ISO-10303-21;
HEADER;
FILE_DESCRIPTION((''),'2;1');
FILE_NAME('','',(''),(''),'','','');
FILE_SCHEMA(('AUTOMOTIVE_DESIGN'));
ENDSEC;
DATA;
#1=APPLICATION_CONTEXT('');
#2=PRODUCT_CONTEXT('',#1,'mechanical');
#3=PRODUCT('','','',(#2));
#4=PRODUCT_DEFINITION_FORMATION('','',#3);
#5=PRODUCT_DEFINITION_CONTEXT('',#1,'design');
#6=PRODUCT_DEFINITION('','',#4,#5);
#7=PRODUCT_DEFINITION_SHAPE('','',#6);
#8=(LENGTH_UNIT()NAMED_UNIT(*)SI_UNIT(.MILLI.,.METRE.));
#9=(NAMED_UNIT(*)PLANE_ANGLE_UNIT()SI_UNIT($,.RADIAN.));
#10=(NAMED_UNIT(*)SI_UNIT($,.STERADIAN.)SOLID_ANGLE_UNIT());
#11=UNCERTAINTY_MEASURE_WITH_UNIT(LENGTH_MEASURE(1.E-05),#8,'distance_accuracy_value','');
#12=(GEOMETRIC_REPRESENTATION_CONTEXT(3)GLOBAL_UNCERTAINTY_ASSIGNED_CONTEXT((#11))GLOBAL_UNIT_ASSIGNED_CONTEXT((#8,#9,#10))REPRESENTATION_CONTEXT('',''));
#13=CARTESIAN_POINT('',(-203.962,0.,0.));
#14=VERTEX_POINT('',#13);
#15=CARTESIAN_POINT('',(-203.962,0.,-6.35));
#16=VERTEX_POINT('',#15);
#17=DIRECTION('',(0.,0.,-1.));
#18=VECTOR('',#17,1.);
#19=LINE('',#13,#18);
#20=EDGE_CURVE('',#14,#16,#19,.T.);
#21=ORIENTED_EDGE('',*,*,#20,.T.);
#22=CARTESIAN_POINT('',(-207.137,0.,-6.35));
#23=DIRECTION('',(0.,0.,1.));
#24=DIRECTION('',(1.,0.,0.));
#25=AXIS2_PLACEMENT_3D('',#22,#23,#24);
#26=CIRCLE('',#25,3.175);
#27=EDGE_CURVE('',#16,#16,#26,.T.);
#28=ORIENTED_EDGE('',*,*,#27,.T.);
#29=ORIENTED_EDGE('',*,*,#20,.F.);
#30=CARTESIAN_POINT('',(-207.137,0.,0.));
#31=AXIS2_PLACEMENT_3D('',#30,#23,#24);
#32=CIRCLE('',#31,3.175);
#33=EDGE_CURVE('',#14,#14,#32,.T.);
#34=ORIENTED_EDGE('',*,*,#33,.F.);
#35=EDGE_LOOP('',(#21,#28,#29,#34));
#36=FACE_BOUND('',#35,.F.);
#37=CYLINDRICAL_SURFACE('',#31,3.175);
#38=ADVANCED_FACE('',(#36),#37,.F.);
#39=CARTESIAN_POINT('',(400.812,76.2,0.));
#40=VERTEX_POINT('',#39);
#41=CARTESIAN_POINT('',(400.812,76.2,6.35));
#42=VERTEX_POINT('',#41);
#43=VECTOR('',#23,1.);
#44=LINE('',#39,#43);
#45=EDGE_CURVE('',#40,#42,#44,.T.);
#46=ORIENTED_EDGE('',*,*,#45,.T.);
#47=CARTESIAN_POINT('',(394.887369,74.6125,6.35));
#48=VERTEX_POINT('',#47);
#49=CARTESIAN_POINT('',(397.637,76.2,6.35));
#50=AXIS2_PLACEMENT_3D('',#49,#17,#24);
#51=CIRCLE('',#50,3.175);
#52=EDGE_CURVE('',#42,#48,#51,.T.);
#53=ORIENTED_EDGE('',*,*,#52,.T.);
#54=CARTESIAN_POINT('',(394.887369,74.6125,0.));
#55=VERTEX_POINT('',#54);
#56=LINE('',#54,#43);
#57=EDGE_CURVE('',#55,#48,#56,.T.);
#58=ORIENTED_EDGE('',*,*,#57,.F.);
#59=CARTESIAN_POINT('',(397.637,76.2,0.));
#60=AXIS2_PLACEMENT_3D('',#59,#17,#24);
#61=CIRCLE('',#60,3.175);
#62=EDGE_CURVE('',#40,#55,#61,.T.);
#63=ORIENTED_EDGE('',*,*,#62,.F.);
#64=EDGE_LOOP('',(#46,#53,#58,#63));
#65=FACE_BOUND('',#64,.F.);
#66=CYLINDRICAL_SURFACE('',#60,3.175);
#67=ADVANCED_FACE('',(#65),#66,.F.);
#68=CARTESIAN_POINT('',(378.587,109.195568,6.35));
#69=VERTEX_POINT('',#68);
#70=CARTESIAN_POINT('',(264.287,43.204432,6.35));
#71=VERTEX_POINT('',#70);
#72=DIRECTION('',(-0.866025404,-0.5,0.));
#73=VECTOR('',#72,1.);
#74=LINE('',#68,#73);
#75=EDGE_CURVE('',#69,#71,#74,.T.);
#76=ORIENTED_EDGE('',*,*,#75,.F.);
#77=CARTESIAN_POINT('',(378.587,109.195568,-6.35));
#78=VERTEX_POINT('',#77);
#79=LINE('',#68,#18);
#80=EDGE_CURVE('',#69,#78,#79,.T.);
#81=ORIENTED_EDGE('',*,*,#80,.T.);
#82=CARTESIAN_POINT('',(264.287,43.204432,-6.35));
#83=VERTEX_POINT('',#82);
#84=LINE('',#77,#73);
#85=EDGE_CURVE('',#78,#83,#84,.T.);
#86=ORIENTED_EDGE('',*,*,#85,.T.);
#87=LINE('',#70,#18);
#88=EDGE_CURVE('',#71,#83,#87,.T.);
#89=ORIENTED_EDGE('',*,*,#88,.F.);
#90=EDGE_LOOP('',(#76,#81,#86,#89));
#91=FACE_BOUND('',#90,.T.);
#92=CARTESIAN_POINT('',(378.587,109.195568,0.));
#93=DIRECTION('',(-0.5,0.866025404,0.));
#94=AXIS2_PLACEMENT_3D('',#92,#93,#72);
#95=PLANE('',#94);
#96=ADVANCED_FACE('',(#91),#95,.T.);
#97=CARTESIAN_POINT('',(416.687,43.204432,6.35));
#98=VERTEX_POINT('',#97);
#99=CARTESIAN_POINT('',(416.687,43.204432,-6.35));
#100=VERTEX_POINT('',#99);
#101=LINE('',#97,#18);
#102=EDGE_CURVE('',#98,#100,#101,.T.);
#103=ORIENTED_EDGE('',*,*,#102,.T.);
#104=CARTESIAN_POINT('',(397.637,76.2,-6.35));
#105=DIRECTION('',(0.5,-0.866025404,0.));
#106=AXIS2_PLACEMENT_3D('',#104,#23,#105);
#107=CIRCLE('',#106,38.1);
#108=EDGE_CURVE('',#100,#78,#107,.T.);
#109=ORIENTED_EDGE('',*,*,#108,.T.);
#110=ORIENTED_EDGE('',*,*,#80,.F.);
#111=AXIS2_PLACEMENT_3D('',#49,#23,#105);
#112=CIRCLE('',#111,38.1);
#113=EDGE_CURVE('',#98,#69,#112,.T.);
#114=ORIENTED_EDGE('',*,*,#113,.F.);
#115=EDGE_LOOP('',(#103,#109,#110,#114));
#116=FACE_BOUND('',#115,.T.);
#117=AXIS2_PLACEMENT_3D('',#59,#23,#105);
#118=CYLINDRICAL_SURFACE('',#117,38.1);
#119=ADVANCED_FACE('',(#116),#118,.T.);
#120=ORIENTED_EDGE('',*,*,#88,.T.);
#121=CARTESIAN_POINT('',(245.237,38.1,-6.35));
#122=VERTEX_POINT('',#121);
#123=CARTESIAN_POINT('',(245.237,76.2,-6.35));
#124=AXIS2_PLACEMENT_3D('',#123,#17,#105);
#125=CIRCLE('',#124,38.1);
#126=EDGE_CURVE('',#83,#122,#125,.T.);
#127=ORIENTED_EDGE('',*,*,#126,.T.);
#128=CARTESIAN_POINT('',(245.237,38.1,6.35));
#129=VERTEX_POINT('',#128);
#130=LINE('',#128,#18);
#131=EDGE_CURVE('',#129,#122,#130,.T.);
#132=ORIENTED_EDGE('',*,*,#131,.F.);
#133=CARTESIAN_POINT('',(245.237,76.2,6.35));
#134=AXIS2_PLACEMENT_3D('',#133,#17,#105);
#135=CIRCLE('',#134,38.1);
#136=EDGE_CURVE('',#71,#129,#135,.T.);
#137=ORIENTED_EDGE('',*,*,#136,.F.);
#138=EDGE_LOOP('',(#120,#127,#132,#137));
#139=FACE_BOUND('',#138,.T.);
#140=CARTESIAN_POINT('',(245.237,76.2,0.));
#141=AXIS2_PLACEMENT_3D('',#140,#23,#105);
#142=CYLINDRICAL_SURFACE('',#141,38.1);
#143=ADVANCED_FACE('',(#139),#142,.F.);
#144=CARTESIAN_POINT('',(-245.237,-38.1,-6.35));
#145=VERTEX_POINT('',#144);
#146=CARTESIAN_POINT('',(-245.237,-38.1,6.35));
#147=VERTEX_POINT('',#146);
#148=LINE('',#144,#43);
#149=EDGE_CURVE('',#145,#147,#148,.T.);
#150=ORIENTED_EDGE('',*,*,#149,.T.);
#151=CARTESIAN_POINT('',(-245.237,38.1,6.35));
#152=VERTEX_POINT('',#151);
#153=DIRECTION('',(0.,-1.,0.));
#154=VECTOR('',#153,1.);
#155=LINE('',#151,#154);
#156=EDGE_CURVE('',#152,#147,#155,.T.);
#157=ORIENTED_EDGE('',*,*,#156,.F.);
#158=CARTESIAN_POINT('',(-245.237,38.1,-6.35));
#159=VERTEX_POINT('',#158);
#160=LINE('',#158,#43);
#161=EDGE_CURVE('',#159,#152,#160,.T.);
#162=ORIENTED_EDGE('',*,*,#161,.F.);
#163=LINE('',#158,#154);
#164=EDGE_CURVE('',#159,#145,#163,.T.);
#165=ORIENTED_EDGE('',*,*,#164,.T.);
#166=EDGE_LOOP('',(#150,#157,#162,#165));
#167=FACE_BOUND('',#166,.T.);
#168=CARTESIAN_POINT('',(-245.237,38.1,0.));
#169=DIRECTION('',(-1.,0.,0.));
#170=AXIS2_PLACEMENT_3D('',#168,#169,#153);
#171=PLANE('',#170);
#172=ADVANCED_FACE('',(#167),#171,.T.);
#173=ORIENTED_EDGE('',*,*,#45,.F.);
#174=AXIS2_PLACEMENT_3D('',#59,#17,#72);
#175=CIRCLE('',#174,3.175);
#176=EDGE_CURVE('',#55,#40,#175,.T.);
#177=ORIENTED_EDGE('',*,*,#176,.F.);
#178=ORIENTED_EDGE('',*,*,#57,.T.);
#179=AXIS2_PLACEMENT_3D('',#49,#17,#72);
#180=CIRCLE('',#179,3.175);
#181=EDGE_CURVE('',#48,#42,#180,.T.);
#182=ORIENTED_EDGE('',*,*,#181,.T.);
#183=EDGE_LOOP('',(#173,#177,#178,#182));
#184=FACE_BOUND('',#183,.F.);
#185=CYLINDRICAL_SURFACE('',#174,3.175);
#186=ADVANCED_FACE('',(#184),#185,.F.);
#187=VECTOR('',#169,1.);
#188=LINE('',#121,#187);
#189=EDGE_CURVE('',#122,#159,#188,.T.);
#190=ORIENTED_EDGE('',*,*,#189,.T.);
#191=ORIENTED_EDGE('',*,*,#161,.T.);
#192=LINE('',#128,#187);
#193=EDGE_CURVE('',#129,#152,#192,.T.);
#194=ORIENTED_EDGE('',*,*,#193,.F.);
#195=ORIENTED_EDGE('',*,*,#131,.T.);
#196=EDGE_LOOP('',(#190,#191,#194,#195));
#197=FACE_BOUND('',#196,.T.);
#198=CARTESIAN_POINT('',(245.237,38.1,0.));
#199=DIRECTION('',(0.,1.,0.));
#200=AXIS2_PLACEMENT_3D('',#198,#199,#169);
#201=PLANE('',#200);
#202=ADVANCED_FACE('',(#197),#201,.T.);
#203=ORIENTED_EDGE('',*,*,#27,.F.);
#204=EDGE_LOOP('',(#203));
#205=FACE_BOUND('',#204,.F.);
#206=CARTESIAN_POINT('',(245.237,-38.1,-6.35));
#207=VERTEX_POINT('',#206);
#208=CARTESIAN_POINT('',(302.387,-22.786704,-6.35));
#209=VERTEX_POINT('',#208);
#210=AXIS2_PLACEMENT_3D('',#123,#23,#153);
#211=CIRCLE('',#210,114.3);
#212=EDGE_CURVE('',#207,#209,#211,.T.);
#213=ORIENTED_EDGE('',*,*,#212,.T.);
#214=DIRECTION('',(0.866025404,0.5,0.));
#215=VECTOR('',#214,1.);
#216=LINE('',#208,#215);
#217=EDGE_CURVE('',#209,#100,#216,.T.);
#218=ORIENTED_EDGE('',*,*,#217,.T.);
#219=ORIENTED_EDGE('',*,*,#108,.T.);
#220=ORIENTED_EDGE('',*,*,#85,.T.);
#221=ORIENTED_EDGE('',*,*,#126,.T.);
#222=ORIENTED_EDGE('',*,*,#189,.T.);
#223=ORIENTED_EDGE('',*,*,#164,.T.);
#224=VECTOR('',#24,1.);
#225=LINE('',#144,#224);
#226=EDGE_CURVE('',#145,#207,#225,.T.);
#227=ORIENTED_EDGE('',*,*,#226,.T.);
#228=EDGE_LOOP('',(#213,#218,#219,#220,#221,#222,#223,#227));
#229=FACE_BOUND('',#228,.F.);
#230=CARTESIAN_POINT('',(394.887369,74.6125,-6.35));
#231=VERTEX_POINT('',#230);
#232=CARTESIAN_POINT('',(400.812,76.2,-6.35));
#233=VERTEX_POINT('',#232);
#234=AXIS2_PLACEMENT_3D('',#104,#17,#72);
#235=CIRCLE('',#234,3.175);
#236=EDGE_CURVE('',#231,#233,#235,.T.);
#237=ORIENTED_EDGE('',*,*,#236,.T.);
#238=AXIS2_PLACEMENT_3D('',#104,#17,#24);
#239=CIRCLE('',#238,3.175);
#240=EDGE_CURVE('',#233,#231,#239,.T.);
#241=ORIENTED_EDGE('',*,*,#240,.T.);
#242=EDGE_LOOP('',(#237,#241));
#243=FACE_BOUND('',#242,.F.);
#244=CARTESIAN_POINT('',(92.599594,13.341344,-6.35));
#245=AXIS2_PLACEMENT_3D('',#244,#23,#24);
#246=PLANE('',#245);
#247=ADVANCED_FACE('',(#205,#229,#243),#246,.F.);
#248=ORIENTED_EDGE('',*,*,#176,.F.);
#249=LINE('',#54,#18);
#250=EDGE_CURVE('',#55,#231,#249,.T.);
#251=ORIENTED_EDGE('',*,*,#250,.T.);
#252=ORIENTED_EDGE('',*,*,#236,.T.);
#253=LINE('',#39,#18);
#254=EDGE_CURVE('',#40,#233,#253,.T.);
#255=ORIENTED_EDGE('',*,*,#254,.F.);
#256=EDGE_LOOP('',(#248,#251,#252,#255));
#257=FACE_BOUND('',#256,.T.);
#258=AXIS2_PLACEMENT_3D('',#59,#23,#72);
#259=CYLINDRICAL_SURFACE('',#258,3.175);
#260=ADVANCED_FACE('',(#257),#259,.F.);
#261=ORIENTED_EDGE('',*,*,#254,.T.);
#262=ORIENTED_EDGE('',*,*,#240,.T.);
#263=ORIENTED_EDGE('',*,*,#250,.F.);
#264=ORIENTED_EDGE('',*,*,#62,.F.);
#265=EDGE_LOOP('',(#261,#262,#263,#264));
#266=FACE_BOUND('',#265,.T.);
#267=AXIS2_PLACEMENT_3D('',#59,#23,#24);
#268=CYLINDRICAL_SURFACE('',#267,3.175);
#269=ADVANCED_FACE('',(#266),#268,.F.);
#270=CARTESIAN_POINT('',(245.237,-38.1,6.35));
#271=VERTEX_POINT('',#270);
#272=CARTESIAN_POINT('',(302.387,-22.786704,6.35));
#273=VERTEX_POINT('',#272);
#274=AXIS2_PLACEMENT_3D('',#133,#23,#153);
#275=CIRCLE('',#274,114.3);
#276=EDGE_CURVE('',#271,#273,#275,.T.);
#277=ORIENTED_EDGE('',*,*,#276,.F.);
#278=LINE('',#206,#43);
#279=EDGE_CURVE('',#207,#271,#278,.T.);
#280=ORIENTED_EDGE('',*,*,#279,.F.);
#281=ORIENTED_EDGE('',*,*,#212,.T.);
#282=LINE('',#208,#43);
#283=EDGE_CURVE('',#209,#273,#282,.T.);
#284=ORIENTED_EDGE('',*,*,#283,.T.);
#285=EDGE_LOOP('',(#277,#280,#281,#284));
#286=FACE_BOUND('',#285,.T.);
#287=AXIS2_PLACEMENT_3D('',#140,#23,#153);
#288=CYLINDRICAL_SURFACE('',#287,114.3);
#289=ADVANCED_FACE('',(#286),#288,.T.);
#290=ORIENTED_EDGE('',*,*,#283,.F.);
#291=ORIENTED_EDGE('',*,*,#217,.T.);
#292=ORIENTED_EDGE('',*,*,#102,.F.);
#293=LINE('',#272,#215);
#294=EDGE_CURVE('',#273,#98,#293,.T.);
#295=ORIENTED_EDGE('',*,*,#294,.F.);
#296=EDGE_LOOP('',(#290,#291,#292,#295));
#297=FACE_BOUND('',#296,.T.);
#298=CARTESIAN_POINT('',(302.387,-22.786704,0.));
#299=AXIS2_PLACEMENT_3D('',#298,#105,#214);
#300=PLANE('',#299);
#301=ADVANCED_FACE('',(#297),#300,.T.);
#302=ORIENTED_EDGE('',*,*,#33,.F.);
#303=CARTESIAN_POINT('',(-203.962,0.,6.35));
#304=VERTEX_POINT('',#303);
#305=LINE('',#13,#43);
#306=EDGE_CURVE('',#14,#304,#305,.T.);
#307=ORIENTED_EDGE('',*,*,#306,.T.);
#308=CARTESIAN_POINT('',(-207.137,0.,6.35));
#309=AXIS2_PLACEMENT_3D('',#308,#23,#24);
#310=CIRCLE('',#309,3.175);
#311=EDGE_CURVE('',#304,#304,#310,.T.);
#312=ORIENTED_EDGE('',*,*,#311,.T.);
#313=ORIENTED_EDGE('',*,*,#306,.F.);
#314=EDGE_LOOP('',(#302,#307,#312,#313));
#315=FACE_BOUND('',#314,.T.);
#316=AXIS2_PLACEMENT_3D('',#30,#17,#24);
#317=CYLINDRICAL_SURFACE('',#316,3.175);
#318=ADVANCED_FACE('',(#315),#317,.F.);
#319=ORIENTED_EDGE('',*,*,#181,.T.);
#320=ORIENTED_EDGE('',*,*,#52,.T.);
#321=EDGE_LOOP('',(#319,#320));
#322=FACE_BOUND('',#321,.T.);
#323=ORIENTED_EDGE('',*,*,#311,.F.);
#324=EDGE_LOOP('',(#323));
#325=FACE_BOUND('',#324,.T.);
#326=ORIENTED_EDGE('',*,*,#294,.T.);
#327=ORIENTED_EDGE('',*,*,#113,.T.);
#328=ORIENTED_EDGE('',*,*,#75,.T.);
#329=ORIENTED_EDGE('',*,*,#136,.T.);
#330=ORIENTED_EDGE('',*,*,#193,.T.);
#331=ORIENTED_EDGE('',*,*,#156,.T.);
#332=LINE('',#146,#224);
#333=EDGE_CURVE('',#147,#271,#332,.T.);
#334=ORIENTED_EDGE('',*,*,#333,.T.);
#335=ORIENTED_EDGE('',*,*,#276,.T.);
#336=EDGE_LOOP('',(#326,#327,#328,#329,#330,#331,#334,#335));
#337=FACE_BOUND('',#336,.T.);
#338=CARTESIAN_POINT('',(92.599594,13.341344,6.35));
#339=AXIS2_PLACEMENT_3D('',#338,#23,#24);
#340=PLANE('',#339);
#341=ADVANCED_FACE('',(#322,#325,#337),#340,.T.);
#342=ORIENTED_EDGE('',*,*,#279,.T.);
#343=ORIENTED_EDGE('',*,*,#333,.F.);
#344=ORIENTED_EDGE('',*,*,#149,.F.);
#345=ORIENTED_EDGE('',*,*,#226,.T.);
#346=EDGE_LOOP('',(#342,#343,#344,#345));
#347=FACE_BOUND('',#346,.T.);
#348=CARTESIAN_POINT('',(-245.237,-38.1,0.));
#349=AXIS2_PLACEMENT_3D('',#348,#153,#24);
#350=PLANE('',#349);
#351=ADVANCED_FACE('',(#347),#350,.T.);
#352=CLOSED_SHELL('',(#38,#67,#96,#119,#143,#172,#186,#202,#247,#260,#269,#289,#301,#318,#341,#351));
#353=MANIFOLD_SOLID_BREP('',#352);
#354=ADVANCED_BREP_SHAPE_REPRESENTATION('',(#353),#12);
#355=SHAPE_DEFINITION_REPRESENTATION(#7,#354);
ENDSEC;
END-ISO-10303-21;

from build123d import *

# Parameters (mm, degrees)
F0_R     = 3.175
F1_DEPTH = 6.35


# Not quite as in the source:
# - a feature names something its author has since deleted; it is built from what else it names


with BuildPart() as f1:
    # F0 (on Top) → F1 (new body, symmetric)
    with BuildSketch(Plane.XY):
        with BuildLine():
            Line((245.237, 38.1), (-245.237, 38.1))
            Line((-245.237, 38.1), (-245.237, -38.1))
            Line((-245.237, -38.1), (245.237, -38.1))
            ThreePointArc((245.237, -38.1), (274.8200168552, -34.2053219448), (302.387, -22.7867036526))
            Line((302.387, -22.7867036526), (416.687, 43.2044321158))
            ThreePointArc((416.687, 43.2044321158), (430.6325678842, 95.25), (378.587, 109.1955678842))
            Line((378.587, 109.1955678842), (321.437, 76.2))
            Line((321.437, 76.2), (264.287, 43.2044321158))
            ThreePointArc((264.287, 43.2044321158), (255.0980056184, 39.3982260184), (245.237, 38.1))
        make_face()
        with Locations((-207.137, 0)):
            Circle(F0_R, mode=Mode.SUBTRACT)
        with BuildLine():
            ThreePointArc((394.887369343, 74.6125), (396.8152495318, 79.2668144985), (400.812, 76.2))
            ThreePointArc((400.812, 76.2), (398.4587504682, 73.1331855015), (394.887369343, 74.6125))
        make_face(mode=Mode.SUBTRACT)
    extrude(amount=F1_DEPTH, both=True)


solid = f1.part
